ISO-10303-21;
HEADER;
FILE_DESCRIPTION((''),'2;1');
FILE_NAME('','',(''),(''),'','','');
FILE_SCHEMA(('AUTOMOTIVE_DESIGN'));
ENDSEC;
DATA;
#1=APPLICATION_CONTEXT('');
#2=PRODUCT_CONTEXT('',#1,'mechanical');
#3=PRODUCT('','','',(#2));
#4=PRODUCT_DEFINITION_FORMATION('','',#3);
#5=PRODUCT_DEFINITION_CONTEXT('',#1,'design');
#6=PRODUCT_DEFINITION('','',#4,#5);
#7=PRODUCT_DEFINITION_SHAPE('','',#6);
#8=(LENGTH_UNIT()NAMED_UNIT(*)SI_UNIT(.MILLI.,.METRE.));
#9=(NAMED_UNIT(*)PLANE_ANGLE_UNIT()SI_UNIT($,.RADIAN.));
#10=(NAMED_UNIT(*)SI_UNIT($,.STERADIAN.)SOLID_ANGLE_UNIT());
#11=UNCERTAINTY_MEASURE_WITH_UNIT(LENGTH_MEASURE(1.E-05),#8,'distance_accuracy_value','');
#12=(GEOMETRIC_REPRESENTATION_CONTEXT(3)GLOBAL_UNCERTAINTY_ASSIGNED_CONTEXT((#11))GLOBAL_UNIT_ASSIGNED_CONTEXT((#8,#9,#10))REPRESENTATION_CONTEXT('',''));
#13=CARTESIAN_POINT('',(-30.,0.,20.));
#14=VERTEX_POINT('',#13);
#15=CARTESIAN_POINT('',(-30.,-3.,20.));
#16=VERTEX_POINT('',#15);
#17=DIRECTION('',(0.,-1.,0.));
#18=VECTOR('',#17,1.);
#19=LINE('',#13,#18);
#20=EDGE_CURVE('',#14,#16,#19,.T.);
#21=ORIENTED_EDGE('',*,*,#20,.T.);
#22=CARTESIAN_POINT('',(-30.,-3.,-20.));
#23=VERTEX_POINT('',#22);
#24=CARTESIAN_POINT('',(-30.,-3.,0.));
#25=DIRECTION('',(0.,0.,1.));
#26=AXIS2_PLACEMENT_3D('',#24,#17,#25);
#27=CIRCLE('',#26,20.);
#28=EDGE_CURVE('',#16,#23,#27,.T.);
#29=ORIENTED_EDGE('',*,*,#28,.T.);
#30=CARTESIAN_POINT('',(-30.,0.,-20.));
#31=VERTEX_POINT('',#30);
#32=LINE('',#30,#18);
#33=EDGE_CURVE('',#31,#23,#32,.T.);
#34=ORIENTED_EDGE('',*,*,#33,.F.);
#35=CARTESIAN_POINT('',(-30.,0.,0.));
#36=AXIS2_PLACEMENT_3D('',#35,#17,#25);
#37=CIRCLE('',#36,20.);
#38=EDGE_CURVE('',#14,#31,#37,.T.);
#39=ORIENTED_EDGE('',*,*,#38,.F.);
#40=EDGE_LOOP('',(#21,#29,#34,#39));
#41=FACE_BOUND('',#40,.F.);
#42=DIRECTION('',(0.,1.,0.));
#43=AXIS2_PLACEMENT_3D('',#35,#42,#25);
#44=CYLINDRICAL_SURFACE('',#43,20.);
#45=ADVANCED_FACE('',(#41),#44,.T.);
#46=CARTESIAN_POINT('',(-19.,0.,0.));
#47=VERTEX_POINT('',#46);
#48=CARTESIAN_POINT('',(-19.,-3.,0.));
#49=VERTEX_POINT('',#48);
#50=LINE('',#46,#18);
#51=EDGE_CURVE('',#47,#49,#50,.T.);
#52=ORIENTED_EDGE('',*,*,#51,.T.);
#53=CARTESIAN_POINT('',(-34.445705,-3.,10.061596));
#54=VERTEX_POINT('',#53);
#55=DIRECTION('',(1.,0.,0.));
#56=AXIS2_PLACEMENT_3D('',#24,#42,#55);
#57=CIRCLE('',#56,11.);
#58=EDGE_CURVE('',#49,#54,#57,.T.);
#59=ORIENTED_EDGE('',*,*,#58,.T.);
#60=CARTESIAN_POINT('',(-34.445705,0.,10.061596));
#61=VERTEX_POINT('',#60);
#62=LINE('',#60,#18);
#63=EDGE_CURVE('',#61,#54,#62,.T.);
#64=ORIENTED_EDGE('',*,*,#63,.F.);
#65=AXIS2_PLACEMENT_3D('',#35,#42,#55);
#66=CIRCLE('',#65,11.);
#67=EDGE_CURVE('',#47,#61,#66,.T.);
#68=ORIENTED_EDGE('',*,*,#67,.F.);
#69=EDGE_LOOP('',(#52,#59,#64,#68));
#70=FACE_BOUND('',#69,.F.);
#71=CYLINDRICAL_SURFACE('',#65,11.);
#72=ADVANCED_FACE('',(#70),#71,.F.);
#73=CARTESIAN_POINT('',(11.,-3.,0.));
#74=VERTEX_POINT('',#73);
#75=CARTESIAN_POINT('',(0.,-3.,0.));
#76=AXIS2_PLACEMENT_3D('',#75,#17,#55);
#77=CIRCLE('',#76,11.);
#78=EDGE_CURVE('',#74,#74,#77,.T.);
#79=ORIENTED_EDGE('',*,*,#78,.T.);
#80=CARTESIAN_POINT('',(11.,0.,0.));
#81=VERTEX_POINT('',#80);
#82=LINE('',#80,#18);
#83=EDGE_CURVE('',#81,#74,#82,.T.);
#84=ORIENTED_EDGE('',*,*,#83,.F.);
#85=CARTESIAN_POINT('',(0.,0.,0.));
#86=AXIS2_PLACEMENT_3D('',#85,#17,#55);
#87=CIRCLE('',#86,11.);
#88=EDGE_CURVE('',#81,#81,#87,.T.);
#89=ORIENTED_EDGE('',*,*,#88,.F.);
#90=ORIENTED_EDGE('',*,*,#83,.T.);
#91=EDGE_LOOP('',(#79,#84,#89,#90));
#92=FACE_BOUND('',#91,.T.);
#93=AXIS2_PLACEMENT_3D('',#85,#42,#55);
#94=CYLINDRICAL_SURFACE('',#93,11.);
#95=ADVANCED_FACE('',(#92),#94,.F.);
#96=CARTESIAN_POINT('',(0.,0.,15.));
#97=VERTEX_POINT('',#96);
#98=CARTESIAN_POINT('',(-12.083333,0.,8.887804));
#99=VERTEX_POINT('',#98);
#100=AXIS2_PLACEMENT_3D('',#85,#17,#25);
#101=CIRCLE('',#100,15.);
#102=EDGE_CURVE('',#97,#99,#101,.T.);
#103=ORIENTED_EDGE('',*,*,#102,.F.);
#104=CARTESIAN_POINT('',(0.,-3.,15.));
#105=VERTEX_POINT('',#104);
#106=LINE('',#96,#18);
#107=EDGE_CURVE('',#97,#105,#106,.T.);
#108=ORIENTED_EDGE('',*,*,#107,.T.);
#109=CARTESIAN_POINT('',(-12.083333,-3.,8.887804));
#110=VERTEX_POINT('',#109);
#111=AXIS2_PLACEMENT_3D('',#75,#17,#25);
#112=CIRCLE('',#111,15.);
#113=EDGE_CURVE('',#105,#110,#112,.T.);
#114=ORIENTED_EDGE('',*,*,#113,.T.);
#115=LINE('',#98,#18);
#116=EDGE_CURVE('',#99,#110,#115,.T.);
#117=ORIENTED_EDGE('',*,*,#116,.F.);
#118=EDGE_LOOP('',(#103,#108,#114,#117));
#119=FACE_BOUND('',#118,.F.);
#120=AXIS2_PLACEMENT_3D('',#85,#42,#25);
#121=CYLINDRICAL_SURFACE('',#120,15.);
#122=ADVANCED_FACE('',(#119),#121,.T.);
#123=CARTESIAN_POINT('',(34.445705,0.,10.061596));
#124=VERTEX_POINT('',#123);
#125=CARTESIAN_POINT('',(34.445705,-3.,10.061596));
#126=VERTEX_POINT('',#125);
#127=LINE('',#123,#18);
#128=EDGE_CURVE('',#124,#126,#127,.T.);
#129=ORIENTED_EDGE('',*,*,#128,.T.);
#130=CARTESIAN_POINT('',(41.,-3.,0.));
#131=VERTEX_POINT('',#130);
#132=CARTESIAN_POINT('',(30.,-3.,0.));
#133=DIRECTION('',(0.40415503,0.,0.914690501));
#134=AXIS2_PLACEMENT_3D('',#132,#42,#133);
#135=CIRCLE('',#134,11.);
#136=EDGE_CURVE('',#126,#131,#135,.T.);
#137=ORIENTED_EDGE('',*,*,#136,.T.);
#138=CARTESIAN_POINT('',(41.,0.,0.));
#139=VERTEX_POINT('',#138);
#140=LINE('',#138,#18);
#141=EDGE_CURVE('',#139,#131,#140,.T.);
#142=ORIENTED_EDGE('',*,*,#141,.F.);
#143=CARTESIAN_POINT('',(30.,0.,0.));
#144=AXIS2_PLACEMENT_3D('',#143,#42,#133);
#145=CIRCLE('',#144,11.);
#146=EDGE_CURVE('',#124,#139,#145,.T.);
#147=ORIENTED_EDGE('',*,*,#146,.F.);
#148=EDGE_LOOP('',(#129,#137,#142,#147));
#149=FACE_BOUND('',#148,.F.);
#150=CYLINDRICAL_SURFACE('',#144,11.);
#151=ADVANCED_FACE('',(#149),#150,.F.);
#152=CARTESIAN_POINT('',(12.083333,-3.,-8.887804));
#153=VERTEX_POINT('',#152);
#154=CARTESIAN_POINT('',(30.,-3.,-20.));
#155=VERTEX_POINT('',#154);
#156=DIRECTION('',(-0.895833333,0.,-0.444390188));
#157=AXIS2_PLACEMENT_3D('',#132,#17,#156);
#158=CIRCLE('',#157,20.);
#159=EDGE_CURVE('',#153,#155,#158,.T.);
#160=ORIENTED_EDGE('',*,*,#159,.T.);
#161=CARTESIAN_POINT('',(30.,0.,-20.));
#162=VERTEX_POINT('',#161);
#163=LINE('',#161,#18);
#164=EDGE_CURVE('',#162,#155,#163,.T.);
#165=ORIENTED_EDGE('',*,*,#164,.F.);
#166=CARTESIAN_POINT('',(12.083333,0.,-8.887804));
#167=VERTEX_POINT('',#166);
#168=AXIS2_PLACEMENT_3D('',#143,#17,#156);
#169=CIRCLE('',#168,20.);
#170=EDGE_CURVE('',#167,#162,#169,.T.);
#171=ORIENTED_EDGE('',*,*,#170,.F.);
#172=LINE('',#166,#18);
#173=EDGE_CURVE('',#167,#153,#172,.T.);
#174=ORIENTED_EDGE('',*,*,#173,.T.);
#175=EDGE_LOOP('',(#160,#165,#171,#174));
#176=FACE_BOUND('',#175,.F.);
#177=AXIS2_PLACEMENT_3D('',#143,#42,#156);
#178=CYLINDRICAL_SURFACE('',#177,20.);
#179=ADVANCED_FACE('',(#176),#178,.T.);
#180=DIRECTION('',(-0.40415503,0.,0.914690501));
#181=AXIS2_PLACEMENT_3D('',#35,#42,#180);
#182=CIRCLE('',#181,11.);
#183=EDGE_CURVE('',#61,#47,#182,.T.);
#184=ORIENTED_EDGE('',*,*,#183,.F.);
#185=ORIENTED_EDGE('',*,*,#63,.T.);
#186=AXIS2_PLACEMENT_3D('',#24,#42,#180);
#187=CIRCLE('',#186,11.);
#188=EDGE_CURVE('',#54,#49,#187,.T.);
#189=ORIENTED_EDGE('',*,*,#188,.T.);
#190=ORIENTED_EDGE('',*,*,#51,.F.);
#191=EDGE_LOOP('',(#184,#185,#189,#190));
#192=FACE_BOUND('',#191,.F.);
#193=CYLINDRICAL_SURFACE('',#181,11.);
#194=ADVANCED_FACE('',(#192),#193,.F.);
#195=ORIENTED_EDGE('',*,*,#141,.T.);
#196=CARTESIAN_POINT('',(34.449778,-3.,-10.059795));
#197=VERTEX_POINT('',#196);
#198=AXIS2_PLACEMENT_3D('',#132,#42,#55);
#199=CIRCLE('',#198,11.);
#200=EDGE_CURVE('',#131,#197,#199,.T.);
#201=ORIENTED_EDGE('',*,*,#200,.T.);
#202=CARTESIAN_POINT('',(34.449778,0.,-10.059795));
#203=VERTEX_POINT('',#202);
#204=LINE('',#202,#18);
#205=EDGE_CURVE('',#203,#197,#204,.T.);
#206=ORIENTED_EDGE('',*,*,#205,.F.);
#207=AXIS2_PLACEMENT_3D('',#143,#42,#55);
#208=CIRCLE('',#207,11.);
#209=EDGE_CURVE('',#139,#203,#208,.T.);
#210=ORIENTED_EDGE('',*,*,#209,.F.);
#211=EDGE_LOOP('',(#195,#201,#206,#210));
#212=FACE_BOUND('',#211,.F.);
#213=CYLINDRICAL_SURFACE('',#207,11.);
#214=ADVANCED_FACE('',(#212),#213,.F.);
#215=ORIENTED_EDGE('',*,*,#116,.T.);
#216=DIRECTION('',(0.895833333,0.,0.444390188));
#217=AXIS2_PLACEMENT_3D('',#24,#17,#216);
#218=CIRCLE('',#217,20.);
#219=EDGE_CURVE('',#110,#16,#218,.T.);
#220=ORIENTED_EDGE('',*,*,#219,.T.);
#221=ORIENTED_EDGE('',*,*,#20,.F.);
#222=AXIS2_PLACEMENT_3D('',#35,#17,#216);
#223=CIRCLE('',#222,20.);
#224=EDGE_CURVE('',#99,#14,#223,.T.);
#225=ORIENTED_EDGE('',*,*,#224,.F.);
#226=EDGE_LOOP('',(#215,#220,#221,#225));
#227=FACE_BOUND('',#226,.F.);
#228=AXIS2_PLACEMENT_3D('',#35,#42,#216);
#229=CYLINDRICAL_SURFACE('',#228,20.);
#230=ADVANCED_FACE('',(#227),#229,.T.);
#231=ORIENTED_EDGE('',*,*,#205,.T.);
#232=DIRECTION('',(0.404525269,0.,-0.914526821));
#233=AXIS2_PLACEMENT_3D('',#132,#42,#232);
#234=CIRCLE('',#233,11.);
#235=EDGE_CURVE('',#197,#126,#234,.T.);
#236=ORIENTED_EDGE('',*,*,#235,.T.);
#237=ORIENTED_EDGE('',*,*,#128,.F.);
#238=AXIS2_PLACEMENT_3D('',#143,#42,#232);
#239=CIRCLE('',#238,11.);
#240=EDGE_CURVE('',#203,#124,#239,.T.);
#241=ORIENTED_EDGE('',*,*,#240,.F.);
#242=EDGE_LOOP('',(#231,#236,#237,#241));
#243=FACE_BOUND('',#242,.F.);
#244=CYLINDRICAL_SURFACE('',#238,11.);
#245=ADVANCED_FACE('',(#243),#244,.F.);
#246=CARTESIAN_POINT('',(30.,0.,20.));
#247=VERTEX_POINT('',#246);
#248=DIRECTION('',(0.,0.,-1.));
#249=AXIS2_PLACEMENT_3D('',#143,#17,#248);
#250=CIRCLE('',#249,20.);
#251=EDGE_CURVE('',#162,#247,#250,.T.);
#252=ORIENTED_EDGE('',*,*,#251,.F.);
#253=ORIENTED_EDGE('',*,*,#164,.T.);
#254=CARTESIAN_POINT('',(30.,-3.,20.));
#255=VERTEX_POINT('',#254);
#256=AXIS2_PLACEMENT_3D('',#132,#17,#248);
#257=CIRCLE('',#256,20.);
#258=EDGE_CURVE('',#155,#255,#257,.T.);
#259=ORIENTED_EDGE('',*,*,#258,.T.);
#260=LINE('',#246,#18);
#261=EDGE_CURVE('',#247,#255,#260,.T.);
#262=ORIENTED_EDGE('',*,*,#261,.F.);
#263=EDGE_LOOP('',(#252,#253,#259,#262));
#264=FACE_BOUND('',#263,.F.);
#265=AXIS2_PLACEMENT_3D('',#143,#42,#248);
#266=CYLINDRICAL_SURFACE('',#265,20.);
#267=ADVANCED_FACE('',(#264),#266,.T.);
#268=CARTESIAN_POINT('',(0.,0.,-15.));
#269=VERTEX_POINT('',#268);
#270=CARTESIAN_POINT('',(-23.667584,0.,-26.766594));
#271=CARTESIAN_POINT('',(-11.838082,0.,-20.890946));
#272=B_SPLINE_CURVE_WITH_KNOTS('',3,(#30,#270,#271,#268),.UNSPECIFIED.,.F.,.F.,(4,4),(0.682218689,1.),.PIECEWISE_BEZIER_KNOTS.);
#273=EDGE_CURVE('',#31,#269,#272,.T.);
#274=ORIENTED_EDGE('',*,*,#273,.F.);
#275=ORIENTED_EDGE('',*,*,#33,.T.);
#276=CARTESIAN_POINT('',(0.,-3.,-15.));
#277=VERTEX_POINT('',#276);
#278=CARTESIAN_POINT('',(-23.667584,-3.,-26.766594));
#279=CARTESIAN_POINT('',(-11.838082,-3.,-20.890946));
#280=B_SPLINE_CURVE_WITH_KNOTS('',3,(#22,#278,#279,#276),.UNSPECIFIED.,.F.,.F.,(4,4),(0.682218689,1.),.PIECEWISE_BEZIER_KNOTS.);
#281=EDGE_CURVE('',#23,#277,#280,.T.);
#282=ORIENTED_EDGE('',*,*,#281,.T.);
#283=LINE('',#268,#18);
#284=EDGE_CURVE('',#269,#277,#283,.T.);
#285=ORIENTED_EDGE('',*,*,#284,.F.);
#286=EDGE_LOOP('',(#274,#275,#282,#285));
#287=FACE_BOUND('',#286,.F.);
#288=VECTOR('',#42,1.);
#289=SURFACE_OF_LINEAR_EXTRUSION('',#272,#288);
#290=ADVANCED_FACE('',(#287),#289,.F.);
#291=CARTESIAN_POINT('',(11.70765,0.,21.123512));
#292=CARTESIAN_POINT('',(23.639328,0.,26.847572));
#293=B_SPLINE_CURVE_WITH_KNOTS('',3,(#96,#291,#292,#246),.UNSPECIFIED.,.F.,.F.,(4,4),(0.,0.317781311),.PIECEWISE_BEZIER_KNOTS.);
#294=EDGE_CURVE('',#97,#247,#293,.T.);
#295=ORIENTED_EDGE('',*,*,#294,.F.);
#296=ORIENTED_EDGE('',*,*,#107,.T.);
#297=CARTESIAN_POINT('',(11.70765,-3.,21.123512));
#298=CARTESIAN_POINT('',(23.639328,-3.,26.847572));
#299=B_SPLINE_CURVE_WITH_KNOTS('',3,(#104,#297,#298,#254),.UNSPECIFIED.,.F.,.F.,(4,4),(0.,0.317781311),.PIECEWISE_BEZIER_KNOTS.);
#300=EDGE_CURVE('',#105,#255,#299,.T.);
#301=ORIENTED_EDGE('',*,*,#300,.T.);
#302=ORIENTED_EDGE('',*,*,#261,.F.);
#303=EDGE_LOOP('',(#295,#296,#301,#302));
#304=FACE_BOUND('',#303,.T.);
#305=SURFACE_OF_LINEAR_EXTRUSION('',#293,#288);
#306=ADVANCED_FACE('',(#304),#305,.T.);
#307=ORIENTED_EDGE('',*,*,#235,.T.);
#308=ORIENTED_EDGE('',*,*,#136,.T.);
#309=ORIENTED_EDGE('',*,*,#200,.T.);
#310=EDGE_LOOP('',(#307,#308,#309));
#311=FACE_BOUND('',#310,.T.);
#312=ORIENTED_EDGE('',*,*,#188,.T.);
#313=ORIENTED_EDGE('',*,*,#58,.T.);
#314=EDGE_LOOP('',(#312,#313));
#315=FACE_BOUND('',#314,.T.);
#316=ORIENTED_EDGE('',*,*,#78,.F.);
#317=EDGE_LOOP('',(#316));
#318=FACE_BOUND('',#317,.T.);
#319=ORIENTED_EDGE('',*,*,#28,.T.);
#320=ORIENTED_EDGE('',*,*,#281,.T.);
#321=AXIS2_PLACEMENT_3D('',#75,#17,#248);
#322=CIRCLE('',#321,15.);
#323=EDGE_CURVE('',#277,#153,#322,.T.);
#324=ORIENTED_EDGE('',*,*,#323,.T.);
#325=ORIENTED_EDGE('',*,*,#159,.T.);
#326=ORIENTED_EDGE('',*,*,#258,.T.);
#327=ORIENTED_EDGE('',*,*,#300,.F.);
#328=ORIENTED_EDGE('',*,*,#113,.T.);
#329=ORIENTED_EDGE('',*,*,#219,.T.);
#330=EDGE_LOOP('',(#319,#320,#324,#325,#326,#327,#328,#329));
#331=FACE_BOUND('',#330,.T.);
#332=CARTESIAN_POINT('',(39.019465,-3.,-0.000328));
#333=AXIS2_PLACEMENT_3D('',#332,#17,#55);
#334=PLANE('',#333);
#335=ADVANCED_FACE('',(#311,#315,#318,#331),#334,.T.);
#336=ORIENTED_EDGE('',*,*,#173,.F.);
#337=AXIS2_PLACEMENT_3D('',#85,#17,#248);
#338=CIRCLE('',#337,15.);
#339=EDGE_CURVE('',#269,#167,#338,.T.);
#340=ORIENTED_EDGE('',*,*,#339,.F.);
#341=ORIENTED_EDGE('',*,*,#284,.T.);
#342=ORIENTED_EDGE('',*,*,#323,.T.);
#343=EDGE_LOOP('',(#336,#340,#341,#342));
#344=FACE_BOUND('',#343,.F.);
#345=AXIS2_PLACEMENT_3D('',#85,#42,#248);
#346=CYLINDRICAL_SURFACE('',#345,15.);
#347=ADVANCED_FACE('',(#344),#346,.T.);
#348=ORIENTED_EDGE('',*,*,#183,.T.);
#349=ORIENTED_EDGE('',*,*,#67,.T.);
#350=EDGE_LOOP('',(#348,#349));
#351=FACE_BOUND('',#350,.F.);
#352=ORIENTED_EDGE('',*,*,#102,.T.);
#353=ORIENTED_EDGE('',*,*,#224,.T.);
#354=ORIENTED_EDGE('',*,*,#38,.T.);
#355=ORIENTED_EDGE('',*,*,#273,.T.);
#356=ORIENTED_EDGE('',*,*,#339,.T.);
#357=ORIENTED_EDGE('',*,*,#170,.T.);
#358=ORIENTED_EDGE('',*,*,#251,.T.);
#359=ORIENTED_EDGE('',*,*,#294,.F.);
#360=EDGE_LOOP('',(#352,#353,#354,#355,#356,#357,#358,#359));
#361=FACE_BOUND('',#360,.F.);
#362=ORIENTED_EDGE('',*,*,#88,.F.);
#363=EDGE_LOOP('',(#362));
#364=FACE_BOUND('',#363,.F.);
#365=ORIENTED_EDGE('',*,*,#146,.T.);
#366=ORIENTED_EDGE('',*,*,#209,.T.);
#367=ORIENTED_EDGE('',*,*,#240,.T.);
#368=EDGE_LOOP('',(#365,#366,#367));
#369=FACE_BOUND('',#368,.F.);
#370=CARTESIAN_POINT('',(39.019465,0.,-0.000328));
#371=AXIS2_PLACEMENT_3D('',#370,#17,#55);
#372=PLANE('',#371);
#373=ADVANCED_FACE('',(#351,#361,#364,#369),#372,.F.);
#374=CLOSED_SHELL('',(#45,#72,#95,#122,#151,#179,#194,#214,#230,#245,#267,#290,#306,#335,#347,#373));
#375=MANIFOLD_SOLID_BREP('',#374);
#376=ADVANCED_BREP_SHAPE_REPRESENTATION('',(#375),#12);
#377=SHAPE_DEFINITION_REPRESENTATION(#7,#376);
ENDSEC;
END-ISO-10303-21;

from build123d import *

# Parameters (mm, degrees)
F0_R     = 11
F1_DEPTH = 3


with BuildPart() as f1:
    # F0 (on Front) → F1 (new body)
    with BuildSketch(Plane.XZ):
        with BuildLine():
            ThreePointArc((34.4457053252, 10.0615955075), (39.2169072518, 6.0040503586), (41, -2e-10))
            ThreePointArc((41, -2e-10), (39.218122302, -6.0021847046), (34.4497779591, -10.0597950337))
            add(Edge.make_bspline(
                [(34.4497779591, -10.0597950337), (33.5572864984, -14.2139641421), (32.0732731389, -17.7845741491), (30, -20)],
                knots=[0.5781750695, 0.5781750695, 0.5781750695, 0.5781750695, 0.6822186894, 0.6822186894, 0.6822186894, 0.6822186894], degree=3))
            ThreePointArc((30, -20), (50, 0), (30, 20))
            add(Edge.make_bspline(
                [(30, 20), (32.0727475467, 17.7685869814), (33.5539058525, 14.2021827738), (34.4457053252, 10.0615955075)],
                knots=[0.3177813106, 0.3177813106, 0.3177813106, 0.3177813106, 0.4213364669, 0.4213364669, 0.4213364669, 0.4213364669], degree=3))
        make_face()
        with BuildLine():
            ThreePointArc((34.4497779591, -10.0597950337), (19.0000002253, -0.0022264354), (34.4457053252, 10.0615955075))
            add(Edge.make_bspline(
                [(30, 20), (32.0727475467, 17.7685869814), (33.5539058525, 14.2021827738), (34.4457053252, 10.0615955075)],
                knots=[0.3177813106, 0.3177813106, 0.3177813106, 0.3177813106, 0.4213364669, 0.4213364669, 0.4213364669, 0.4213364669], degree=3))
            add(Edge.make_bspline(
                [(0, 15), (11.7076504976, 21.1235117167), (23.6393275279, 26.8475716609), (30, 20)],
                knots=[0, 0, 0, 0, 0.3177813106, 0.3177813106, 0.3177813106, 0.3177813106], degree=3))
            ThreePointArc((0, 15), (-6.7706330465, 13.3850113242), (-12.0833333333, 8.8878037532))
            ThreePointArc((-12.0833333333, 8.8878037532), (-19.4585597536, 16.9964124901), (-30, 20))
            add(Edge.make_bspline(
                [(-30, 20), (-32.0727475467, 17.7685869814), (-33.5539058525, 14.2021827738), (-34.4457053252, 10.0615955075)],
                knots=[0.3177813106, 0.3177813106, 0.3177813106, 0.3177813106, 0.4213364669, 0.4213364669, 0.4213364669, 0.4213364669], degree=3))
            ThreePointArc((-34.4457053252, 10.0615955075), (-23.9959496412, 9.2169072516), (-19, -2e-10))
            ThreePointArc((-19, -2e-10), (-23.9978152957, -9.2181223023), (-34.4497779591, -10.0597950337))
            add(Edge.make_bspline(
                [(-34.4497779591, -10.0597950337), (-33.5572864984, -14.2139641421), (-32.0732731389, -17.7845741491), (-30, -20)],
                knots=[0.5781750695, 0.5781750695, 0.5781750695, 0.5781750695, 0.6822186894, 0.6822186894, 0.6822186894, 0.6822186894], degree=3))
            add(Edge.make_bspline(
                [(-30, -20), (-23.6675842682, -26.7665939655), (-11.8380817304, -20.8909455716), (0, -15)],
                knots=[0.6822186894, 0.6822186894, 0.6822186894, 0.6822186894, 1, 1, 1, 1], degree=3))
            ThreePointArc((0, -15), (6.7706330465, -13.3850113242), (12.0833333333, -8.8878037532))
            ThreePointArc((12.0833333333, -8.8878037532), (19.4585597536, -16.9964124901), (30, -20))
            add(Edge.make_bspline(
                [(34.4497779591, -10.0597950337), (33.5572864984, -14.2139641421), (32.0732731389, -17.7845741491), (30, -20)],
                knots=[0.5781750695, 0.5781750695, 0.5781750695, 0.5781750695, 0.6822186894, 0.6822186894, 0.6822186894, 0.6822186894], degree=3))
        make_face()
        Circle(F0_R, mode=Mode.SUBTRACT)
        with BuildLine():
            add(Edge.make_bspline(
                [(-30, 20), (-32.0727475467, 17.7685869814), (-33.5539058525, 14.2021827738), (-34.4457053252, 10.0615955075)],
                knots=[0.3177813106, 0.3177813106, 0.3177813106, 0.3177813106, 0.4213364669, 0.4213364669, 0.4213364669, 0.4213364669], degree=3))
            ThreePointArc((-30, 20), (-50, 0), (-30, -20))
            add(Edge.make_bspline(
                [(-34.4497779591, -10.0597950337), (-33.5572864984, -14.2139641421), (-32.0732731389, -17.7845741491), (-30, -20)],
                knots=[0.5781750695, 0.5781750695, 0.5781750695, 0.5781750695, 0.6822186894, 0.6822186894, 0.6822186894, 0.6822186894], degree=3))
            ThreePointArc((-34.4497779591, -10.0597950337), (-40.9999997747, 0.0022264349), (-34.4457053252, 10.0615955075))
        make_face()
    extrude(amount=F1_DEPTH)


solid = f1.part
